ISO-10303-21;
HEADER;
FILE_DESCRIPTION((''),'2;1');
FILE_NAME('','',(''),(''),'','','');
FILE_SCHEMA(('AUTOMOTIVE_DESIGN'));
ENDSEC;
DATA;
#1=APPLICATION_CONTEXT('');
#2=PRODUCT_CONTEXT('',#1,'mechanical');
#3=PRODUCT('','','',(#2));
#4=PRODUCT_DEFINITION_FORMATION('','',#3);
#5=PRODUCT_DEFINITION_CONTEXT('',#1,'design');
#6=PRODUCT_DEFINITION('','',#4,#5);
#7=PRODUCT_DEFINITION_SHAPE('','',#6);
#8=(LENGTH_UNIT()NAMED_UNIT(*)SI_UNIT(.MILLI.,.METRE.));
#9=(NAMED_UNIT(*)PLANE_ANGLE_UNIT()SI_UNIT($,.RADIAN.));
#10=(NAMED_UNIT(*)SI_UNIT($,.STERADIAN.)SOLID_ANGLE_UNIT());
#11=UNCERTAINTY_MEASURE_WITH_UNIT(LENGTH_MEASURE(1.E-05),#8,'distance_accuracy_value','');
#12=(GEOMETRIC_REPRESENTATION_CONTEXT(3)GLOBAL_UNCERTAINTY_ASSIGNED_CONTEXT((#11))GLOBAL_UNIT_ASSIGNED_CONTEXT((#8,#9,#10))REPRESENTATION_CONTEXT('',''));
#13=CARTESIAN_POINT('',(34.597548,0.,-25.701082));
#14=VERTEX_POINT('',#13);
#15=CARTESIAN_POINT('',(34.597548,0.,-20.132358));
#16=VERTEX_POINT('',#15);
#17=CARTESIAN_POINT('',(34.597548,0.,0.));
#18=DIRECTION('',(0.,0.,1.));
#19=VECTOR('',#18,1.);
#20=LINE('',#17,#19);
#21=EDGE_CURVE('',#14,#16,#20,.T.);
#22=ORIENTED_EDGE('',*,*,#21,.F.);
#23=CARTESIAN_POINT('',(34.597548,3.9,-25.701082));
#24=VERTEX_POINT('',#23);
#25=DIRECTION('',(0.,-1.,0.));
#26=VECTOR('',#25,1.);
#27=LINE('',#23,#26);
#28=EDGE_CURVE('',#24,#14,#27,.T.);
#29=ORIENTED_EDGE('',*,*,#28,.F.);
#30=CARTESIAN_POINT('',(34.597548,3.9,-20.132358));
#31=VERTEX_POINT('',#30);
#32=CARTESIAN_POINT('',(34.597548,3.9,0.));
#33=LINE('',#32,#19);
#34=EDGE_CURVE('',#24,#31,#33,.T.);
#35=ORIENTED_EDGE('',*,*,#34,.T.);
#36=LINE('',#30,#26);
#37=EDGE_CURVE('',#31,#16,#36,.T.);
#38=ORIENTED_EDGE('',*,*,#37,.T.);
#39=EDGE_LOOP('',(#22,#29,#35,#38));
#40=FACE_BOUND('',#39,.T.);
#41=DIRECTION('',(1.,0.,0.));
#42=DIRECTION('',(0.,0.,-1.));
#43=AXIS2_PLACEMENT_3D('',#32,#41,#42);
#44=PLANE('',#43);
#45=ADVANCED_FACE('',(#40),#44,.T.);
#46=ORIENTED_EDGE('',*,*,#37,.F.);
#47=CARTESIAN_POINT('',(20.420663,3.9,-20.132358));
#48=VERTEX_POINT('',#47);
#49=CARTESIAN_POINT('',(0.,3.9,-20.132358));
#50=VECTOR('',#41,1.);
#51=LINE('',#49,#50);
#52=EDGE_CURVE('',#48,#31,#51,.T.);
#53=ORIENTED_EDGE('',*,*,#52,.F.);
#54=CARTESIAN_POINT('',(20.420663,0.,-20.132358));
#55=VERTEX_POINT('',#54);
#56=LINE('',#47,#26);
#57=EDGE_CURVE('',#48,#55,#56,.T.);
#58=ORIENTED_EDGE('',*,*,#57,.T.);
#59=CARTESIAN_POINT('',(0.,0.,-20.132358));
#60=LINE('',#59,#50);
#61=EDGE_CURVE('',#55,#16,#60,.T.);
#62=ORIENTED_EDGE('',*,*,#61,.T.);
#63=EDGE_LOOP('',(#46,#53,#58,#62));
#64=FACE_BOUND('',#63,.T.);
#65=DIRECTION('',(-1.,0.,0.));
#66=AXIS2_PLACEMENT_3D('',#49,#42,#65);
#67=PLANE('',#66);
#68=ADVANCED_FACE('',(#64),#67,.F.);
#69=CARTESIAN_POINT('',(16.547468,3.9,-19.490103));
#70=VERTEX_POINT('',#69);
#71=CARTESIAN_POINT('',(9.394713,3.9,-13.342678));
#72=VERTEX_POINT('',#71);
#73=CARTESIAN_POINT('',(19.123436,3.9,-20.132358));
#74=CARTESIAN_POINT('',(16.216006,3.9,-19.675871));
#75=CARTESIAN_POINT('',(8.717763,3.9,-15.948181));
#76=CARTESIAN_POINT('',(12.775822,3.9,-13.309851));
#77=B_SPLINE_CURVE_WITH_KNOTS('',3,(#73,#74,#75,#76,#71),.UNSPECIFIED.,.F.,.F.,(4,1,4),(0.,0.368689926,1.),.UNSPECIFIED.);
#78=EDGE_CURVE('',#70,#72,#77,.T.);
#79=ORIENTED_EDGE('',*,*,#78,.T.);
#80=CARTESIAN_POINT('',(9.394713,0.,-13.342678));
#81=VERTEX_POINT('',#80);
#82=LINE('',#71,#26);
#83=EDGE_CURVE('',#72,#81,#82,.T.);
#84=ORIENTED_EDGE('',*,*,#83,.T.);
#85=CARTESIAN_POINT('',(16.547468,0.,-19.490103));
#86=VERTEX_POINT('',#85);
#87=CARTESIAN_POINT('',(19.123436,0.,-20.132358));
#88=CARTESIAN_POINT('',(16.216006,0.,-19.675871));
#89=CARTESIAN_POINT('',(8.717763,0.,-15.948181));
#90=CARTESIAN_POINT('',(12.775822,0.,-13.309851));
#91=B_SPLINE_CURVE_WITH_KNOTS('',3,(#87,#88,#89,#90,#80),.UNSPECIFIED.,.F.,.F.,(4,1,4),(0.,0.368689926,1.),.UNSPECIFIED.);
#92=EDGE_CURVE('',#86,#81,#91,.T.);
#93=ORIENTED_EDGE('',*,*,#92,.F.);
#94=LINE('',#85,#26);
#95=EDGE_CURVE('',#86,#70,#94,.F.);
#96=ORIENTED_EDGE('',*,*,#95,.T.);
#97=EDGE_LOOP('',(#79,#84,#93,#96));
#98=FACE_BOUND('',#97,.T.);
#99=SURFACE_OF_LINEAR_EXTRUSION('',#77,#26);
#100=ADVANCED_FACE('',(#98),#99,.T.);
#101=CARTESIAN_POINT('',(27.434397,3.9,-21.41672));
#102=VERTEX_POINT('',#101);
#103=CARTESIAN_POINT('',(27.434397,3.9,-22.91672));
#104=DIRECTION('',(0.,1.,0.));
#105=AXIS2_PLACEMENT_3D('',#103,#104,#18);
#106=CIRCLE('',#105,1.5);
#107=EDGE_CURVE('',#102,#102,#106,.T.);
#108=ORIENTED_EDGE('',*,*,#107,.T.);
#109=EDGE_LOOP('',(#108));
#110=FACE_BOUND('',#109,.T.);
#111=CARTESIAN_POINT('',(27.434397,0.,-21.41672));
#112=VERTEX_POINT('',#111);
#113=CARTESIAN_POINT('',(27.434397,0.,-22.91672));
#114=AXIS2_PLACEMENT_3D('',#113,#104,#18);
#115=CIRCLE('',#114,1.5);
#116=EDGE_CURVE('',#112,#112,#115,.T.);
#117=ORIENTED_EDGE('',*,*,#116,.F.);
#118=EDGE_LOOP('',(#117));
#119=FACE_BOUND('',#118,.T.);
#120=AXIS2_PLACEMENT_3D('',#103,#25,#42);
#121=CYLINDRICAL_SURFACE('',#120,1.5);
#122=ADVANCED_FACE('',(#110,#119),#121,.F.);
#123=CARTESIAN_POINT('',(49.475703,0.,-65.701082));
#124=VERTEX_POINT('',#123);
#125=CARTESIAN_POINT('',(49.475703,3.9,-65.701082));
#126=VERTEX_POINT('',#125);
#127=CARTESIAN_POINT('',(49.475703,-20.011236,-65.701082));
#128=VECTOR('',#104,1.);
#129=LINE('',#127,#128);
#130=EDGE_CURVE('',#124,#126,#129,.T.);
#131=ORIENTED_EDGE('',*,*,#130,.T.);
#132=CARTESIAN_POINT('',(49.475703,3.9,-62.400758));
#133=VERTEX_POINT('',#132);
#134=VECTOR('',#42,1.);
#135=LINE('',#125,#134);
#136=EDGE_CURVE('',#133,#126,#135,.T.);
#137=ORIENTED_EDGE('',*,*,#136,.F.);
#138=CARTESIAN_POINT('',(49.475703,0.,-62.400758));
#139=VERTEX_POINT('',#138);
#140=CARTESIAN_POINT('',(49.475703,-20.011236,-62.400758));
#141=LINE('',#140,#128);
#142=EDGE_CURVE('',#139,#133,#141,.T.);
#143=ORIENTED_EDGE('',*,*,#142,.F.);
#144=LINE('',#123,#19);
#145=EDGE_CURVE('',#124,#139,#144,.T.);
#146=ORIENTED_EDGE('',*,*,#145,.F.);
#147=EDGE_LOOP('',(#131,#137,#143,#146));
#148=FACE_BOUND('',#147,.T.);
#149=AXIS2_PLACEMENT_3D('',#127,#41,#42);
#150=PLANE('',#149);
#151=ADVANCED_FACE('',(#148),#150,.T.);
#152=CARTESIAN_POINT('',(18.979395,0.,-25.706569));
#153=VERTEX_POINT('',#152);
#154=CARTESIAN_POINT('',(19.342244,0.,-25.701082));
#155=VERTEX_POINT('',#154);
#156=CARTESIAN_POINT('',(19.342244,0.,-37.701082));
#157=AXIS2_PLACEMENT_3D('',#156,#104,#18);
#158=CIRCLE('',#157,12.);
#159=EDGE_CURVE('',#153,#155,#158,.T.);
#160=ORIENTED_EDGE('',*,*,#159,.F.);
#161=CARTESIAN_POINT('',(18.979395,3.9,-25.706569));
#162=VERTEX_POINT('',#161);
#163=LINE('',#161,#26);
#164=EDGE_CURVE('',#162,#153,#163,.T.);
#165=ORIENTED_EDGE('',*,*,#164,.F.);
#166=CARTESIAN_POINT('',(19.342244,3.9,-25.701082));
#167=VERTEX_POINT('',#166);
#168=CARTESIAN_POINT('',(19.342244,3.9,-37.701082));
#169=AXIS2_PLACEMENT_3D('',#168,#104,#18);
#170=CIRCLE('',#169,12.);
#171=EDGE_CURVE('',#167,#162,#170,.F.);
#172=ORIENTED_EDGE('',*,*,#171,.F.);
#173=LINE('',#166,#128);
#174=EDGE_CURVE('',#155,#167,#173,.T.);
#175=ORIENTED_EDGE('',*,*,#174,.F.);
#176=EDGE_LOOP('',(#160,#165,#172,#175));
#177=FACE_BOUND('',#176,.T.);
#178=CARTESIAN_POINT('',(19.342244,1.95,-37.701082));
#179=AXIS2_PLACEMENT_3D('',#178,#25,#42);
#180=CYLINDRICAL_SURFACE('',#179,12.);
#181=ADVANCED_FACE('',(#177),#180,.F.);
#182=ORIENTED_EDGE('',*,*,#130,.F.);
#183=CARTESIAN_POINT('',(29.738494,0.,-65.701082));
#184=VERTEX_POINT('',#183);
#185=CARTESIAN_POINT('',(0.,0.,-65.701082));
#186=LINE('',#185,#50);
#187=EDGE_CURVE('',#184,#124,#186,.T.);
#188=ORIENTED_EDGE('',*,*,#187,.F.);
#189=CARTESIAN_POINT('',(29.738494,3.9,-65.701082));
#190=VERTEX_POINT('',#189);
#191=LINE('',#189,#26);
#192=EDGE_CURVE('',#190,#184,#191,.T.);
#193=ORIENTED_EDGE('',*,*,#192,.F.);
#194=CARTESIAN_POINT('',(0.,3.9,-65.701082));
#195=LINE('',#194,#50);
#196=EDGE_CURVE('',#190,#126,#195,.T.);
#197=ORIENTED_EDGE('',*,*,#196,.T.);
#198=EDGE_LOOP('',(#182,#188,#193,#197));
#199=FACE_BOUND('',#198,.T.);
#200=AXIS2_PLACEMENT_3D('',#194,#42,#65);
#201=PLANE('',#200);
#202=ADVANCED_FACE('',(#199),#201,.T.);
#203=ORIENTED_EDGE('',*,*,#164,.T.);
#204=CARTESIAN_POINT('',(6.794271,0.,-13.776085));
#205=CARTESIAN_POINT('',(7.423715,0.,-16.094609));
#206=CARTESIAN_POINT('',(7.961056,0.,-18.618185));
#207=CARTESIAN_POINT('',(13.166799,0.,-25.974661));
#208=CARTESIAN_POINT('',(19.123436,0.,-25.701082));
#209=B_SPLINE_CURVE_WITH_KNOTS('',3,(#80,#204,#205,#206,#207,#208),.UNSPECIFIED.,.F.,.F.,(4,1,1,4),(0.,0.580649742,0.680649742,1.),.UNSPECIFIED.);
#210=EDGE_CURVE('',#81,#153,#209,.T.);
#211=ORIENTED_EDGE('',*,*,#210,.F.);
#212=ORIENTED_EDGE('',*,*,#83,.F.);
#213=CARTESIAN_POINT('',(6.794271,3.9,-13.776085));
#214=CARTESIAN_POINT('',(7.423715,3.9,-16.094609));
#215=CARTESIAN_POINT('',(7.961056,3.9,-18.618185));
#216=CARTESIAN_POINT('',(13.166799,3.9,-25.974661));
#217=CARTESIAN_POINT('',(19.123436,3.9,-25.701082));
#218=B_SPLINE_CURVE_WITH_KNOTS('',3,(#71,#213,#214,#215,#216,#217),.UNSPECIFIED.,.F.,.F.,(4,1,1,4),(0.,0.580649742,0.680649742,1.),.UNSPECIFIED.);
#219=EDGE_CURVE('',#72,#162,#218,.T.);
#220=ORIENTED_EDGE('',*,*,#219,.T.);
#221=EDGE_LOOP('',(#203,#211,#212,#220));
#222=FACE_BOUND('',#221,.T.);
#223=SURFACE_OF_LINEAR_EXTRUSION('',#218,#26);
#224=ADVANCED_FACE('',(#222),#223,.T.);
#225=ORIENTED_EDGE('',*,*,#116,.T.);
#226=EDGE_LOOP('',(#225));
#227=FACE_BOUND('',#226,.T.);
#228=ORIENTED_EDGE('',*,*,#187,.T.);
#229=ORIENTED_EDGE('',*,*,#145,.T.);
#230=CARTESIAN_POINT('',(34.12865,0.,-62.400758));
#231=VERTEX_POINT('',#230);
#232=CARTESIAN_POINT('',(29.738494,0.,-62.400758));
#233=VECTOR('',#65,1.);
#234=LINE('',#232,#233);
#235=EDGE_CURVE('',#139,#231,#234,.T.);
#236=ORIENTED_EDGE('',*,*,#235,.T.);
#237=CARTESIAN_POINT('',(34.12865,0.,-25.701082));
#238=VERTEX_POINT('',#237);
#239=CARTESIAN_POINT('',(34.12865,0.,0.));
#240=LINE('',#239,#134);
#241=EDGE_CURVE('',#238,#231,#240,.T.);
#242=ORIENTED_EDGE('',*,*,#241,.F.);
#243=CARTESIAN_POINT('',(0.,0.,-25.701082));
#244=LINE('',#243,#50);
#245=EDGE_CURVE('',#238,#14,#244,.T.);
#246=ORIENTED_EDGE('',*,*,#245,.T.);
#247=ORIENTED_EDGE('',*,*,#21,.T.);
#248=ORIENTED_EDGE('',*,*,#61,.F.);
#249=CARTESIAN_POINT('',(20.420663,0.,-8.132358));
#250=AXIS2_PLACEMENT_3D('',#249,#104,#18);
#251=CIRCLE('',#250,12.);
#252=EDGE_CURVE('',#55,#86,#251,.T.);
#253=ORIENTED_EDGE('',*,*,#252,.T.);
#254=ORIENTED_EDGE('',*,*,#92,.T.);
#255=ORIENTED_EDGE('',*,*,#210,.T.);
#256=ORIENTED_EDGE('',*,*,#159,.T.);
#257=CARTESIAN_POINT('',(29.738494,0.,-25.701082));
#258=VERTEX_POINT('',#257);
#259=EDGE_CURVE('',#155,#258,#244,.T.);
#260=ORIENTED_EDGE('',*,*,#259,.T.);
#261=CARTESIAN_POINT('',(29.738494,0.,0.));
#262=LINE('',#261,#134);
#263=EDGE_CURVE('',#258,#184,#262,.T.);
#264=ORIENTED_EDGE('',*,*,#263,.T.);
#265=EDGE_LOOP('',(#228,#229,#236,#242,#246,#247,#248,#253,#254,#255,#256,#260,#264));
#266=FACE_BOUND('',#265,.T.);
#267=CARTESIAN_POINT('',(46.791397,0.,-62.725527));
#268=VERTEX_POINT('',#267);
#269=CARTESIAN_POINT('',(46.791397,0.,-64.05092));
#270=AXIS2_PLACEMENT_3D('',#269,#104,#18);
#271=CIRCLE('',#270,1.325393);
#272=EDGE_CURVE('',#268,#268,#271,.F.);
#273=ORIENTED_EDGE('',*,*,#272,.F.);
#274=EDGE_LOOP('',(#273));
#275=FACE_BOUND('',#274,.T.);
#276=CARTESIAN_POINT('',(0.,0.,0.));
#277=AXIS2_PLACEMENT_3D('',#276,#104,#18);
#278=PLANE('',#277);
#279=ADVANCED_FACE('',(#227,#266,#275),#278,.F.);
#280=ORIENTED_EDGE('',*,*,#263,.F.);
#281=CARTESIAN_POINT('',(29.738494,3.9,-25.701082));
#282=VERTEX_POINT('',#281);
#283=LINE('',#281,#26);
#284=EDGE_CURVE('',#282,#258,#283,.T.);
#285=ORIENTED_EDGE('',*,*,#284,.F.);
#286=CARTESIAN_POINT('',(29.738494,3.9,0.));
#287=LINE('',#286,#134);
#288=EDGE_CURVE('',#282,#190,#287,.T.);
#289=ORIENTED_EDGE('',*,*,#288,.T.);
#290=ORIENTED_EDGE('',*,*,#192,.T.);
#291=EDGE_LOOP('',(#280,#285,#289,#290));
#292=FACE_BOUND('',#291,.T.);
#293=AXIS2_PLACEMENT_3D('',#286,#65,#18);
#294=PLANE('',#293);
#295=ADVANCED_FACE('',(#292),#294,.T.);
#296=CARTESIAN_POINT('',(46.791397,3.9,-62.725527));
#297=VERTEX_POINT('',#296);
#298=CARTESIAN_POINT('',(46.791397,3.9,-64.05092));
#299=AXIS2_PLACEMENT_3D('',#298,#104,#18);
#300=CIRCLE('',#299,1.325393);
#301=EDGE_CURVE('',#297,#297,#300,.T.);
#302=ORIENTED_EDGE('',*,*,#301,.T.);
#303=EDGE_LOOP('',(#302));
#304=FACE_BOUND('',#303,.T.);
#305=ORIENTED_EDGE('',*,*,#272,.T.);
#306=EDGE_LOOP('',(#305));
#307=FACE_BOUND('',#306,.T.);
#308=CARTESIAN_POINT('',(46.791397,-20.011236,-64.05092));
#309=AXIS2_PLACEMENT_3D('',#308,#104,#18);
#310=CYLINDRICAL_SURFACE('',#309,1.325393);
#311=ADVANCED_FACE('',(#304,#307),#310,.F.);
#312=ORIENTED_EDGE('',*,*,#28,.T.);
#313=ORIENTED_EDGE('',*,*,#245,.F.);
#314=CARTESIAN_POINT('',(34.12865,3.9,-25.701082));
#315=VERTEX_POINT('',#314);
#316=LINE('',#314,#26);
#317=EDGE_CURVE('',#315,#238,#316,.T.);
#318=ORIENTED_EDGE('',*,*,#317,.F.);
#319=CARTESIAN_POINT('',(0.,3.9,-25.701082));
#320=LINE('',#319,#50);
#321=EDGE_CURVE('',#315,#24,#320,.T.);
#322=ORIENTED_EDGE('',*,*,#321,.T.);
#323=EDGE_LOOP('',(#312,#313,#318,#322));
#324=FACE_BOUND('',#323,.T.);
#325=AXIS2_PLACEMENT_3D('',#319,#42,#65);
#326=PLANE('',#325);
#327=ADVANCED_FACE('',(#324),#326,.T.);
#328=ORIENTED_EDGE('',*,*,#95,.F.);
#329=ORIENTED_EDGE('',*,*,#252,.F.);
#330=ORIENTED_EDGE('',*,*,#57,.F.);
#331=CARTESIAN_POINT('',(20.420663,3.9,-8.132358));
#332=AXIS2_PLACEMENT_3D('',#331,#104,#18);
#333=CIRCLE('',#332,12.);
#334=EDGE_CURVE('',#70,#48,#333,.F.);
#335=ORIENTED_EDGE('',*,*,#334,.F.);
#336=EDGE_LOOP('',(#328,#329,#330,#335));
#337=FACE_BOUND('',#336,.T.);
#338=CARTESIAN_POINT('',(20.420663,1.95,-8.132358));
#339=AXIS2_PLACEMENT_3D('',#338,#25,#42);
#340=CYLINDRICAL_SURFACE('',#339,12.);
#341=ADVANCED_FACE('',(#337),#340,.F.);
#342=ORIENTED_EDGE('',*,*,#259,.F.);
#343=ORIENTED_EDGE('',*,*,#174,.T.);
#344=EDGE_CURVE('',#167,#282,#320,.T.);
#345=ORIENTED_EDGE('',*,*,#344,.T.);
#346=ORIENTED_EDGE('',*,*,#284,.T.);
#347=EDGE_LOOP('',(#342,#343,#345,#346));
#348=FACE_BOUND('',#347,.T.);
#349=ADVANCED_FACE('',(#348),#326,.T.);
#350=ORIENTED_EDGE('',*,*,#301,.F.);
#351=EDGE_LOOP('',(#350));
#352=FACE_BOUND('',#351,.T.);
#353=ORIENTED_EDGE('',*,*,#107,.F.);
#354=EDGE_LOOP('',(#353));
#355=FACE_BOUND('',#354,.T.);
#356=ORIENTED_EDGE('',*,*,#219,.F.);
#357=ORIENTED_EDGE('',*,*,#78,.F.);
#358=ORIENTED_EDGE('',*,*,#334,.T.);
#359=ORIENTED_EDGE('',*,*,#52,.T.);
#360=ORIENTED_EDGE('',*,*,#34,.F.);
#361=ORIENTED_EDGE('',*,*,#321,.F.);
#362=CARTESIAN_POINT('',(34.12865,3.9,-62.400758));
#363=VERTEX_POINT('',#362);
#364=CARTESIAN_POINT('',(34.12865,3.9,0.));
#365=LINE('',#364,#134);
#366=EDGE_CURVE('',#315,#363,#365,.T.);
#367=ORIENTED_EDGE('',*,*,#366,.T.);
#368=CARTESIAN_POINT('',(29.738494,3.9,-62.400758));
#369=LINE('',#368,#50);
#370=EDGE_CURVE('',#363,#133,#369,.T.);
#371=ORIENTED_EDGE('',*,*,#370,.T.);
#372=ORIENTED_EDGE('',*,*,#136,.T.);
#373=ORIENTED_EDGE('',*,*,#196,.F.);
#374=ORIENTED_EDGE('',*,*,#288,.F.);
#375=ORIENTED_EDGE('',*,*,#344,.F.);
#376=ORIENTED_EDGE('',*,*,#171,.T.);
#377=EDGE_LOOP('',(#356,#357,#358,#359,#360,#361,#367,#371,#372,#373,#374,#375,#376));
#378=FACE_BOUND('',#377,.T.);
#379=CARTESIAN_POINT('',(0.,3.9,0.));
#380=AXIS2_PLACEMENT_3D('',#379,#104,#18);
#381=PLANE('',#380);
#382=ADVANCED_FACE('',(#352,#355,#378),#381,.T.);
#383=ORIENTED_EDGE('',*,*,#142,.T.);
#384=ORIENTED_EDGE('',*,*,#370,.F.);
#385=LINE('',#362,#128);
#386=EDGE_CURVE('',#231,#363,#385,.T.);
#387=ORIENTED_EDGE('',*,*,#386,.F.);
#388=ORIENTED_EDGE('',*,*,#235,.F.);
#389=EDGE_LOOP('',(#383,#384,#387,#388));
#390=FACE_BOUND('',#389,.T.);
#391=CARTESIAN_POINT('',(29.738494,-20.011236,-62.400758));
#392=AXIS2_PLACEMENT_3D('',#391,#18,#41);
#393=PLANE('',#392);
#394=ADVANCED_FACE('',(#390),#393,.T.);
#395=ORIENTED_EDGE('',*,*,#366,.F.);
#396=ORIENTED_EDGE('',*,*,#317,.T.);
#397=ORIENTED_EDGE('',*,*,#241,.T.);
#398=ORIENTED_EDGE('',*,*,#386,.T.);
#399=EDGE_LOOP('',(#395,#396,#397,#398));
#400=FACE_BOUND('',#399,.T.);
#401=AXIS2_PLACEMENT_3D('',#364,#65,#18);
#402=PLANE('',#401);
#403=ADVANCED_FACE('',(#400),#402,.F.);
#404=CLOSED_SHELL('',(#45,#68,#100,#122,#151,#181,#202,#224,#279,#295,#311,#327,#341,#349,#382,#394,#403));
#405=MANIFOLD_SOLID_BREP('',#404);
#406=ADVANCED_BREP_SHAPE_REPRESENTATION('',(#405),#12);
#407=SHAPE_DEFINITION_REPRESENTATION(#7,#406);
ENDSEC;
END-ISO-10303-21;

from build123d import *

# Parameters (mm, degrees)
SKETCH2_R           = 1.5
SKETCH2_W           = 4.390155439
SKETCH2_H           = 40
BOSS_EXTRUDE1_DEPTH = 3.9
FILLET3_DEPTH       = 3.9
SKETCH3_W           = 19.737208952
SKETCH3_H           = 3.300323738
SKETCH3_R           = 1.325393383
BOSS_EXTRUDE2_DEPTH = 3.9


with BuildPart() as part:
    # Sketch2 → Boss-Extrude1 (new body)
    # profile 1 of 2: a face of its own
    with BuildSketch(Plane(origin=(0, 0, 0), x_dir=(1, 0, 0), z_dir=(0, 1, 0))):
        with BuildLine():
            Line((19.123436496, 25.701081922), (34.59754825, 25.701081922))
            Line((34.59754825, 25.701081922), (34.59754825, 20.132358135))
            Line((34.59754825, 20.132358135), (19.123436496, 20.132358135))
            add(Edge.make_bspline(
                [(19.123436496, 20.132358135), (16.216005931, 19.675871056), (8.717763219, 15.948180567), (12.775822081, 13.309851453), (9.394712639, 13.342677758)],
                knots=[0, 0, 0, 0, 0.368689926, 1, 1, 1, 1], degree=3))
            add(Edge.make_bspline(
                [(9.394712639, 13.342677758), (6.794270731, 13.776084743), (7.423714975, 16.094608856), (7.961055752, 18.618185123), (13.166799439, 25.974660635), (19.123436496, 25.701081922)],
                knots=[0, 0, 0, 0, 0.580649742, 0.680649742, 1, 1, 1, 1], degree=3))
        make_face()
        with Locations(Location((27.434396639, 22.916720028, 0), (0, 0, 270))):
            Circle(SKETCH2_R, mode=Mode.SUBTRACT)
    # profile 2 of 2: a face of its own
    with BuildSketch(Plane(origin=(0, 0, 0), x_dir=(1, 0, 0), z_dir=(0, 1, 0))):
        with Locations((31.933571829, 45.701081922)):
            Rectangle(SKETCH2_W, SKETCH2_H)
    extrude(amount=BOSS_EXTRUDE1_DEPTH)

    # Fillet3: read off the stored shape, not the designer's step
    # Fillet3 outline → Fillet3 (add)
    with BuildSketch(Plane(origin=(0, 0, 0), x_dir=(1, 0, 0), z_dir=(0, 1, 0))):
        with BuildLine():
            Line((19.123436496, 25.701081922), (19.342243741, 25.701081922))
            ThreePointArc((19.342243741, 25.701081922), (19.160798603, 25.702453764), (18.979394951, 25.706568978))
            add(Edge.make_bspline(
                [(18.979394951, 25.706568978), (19.027278337, 25.705120447), (19.075292343, 25.703293105), (19.123436496, 25.701081922)],
                knots=[0.997418871, 0.997418871, 0.997418871, 0.997418871, 1, 1, 1, 1], degree=3))
        make_face()
        with BuildLine():
            add(Edge.make_bspline(
                [(19.123436496, 20.132358135), (18.238088744, 19.993352301), (17.36599214, 19.769234125), (16.54746782, 19.490102613)],
                knots=[0, 0, 0, 0, 0.112270539, 0.112270539, 0.112270539, 0.112270539], degree=3))
            ThreePointArc((16.54746782, 19.490102613), (18.457621126, 19.970705438), (20.420662932, 20.132358135))
            Line((20.420662932, 20.132358135), (19.123436496, 20.132358135))
        make_face()
    extrude(amount=FILLET3_DEPTH)

    # Sketch3 → Boss-Extrude2 (add)
    with BuildSketch(Plane(origin=(0, 3.9, 0), x_dir=(1, 0, 0), z_dir=(0, 1, 0))):
        with Locations((39.607098585, 64.050920053)):
            Rectangle(SKETCH3_W, SKETCH3_H)
        with Locations(Location((46.791397241, 64.050920053, 0), (0, 0, 270))):
            Circle(SKETCH3_R, mode=Mode.SUBTRACT)
    extrude(amount=-BOSS_EXTRUDE2_DEPTH)


solid = part.part
